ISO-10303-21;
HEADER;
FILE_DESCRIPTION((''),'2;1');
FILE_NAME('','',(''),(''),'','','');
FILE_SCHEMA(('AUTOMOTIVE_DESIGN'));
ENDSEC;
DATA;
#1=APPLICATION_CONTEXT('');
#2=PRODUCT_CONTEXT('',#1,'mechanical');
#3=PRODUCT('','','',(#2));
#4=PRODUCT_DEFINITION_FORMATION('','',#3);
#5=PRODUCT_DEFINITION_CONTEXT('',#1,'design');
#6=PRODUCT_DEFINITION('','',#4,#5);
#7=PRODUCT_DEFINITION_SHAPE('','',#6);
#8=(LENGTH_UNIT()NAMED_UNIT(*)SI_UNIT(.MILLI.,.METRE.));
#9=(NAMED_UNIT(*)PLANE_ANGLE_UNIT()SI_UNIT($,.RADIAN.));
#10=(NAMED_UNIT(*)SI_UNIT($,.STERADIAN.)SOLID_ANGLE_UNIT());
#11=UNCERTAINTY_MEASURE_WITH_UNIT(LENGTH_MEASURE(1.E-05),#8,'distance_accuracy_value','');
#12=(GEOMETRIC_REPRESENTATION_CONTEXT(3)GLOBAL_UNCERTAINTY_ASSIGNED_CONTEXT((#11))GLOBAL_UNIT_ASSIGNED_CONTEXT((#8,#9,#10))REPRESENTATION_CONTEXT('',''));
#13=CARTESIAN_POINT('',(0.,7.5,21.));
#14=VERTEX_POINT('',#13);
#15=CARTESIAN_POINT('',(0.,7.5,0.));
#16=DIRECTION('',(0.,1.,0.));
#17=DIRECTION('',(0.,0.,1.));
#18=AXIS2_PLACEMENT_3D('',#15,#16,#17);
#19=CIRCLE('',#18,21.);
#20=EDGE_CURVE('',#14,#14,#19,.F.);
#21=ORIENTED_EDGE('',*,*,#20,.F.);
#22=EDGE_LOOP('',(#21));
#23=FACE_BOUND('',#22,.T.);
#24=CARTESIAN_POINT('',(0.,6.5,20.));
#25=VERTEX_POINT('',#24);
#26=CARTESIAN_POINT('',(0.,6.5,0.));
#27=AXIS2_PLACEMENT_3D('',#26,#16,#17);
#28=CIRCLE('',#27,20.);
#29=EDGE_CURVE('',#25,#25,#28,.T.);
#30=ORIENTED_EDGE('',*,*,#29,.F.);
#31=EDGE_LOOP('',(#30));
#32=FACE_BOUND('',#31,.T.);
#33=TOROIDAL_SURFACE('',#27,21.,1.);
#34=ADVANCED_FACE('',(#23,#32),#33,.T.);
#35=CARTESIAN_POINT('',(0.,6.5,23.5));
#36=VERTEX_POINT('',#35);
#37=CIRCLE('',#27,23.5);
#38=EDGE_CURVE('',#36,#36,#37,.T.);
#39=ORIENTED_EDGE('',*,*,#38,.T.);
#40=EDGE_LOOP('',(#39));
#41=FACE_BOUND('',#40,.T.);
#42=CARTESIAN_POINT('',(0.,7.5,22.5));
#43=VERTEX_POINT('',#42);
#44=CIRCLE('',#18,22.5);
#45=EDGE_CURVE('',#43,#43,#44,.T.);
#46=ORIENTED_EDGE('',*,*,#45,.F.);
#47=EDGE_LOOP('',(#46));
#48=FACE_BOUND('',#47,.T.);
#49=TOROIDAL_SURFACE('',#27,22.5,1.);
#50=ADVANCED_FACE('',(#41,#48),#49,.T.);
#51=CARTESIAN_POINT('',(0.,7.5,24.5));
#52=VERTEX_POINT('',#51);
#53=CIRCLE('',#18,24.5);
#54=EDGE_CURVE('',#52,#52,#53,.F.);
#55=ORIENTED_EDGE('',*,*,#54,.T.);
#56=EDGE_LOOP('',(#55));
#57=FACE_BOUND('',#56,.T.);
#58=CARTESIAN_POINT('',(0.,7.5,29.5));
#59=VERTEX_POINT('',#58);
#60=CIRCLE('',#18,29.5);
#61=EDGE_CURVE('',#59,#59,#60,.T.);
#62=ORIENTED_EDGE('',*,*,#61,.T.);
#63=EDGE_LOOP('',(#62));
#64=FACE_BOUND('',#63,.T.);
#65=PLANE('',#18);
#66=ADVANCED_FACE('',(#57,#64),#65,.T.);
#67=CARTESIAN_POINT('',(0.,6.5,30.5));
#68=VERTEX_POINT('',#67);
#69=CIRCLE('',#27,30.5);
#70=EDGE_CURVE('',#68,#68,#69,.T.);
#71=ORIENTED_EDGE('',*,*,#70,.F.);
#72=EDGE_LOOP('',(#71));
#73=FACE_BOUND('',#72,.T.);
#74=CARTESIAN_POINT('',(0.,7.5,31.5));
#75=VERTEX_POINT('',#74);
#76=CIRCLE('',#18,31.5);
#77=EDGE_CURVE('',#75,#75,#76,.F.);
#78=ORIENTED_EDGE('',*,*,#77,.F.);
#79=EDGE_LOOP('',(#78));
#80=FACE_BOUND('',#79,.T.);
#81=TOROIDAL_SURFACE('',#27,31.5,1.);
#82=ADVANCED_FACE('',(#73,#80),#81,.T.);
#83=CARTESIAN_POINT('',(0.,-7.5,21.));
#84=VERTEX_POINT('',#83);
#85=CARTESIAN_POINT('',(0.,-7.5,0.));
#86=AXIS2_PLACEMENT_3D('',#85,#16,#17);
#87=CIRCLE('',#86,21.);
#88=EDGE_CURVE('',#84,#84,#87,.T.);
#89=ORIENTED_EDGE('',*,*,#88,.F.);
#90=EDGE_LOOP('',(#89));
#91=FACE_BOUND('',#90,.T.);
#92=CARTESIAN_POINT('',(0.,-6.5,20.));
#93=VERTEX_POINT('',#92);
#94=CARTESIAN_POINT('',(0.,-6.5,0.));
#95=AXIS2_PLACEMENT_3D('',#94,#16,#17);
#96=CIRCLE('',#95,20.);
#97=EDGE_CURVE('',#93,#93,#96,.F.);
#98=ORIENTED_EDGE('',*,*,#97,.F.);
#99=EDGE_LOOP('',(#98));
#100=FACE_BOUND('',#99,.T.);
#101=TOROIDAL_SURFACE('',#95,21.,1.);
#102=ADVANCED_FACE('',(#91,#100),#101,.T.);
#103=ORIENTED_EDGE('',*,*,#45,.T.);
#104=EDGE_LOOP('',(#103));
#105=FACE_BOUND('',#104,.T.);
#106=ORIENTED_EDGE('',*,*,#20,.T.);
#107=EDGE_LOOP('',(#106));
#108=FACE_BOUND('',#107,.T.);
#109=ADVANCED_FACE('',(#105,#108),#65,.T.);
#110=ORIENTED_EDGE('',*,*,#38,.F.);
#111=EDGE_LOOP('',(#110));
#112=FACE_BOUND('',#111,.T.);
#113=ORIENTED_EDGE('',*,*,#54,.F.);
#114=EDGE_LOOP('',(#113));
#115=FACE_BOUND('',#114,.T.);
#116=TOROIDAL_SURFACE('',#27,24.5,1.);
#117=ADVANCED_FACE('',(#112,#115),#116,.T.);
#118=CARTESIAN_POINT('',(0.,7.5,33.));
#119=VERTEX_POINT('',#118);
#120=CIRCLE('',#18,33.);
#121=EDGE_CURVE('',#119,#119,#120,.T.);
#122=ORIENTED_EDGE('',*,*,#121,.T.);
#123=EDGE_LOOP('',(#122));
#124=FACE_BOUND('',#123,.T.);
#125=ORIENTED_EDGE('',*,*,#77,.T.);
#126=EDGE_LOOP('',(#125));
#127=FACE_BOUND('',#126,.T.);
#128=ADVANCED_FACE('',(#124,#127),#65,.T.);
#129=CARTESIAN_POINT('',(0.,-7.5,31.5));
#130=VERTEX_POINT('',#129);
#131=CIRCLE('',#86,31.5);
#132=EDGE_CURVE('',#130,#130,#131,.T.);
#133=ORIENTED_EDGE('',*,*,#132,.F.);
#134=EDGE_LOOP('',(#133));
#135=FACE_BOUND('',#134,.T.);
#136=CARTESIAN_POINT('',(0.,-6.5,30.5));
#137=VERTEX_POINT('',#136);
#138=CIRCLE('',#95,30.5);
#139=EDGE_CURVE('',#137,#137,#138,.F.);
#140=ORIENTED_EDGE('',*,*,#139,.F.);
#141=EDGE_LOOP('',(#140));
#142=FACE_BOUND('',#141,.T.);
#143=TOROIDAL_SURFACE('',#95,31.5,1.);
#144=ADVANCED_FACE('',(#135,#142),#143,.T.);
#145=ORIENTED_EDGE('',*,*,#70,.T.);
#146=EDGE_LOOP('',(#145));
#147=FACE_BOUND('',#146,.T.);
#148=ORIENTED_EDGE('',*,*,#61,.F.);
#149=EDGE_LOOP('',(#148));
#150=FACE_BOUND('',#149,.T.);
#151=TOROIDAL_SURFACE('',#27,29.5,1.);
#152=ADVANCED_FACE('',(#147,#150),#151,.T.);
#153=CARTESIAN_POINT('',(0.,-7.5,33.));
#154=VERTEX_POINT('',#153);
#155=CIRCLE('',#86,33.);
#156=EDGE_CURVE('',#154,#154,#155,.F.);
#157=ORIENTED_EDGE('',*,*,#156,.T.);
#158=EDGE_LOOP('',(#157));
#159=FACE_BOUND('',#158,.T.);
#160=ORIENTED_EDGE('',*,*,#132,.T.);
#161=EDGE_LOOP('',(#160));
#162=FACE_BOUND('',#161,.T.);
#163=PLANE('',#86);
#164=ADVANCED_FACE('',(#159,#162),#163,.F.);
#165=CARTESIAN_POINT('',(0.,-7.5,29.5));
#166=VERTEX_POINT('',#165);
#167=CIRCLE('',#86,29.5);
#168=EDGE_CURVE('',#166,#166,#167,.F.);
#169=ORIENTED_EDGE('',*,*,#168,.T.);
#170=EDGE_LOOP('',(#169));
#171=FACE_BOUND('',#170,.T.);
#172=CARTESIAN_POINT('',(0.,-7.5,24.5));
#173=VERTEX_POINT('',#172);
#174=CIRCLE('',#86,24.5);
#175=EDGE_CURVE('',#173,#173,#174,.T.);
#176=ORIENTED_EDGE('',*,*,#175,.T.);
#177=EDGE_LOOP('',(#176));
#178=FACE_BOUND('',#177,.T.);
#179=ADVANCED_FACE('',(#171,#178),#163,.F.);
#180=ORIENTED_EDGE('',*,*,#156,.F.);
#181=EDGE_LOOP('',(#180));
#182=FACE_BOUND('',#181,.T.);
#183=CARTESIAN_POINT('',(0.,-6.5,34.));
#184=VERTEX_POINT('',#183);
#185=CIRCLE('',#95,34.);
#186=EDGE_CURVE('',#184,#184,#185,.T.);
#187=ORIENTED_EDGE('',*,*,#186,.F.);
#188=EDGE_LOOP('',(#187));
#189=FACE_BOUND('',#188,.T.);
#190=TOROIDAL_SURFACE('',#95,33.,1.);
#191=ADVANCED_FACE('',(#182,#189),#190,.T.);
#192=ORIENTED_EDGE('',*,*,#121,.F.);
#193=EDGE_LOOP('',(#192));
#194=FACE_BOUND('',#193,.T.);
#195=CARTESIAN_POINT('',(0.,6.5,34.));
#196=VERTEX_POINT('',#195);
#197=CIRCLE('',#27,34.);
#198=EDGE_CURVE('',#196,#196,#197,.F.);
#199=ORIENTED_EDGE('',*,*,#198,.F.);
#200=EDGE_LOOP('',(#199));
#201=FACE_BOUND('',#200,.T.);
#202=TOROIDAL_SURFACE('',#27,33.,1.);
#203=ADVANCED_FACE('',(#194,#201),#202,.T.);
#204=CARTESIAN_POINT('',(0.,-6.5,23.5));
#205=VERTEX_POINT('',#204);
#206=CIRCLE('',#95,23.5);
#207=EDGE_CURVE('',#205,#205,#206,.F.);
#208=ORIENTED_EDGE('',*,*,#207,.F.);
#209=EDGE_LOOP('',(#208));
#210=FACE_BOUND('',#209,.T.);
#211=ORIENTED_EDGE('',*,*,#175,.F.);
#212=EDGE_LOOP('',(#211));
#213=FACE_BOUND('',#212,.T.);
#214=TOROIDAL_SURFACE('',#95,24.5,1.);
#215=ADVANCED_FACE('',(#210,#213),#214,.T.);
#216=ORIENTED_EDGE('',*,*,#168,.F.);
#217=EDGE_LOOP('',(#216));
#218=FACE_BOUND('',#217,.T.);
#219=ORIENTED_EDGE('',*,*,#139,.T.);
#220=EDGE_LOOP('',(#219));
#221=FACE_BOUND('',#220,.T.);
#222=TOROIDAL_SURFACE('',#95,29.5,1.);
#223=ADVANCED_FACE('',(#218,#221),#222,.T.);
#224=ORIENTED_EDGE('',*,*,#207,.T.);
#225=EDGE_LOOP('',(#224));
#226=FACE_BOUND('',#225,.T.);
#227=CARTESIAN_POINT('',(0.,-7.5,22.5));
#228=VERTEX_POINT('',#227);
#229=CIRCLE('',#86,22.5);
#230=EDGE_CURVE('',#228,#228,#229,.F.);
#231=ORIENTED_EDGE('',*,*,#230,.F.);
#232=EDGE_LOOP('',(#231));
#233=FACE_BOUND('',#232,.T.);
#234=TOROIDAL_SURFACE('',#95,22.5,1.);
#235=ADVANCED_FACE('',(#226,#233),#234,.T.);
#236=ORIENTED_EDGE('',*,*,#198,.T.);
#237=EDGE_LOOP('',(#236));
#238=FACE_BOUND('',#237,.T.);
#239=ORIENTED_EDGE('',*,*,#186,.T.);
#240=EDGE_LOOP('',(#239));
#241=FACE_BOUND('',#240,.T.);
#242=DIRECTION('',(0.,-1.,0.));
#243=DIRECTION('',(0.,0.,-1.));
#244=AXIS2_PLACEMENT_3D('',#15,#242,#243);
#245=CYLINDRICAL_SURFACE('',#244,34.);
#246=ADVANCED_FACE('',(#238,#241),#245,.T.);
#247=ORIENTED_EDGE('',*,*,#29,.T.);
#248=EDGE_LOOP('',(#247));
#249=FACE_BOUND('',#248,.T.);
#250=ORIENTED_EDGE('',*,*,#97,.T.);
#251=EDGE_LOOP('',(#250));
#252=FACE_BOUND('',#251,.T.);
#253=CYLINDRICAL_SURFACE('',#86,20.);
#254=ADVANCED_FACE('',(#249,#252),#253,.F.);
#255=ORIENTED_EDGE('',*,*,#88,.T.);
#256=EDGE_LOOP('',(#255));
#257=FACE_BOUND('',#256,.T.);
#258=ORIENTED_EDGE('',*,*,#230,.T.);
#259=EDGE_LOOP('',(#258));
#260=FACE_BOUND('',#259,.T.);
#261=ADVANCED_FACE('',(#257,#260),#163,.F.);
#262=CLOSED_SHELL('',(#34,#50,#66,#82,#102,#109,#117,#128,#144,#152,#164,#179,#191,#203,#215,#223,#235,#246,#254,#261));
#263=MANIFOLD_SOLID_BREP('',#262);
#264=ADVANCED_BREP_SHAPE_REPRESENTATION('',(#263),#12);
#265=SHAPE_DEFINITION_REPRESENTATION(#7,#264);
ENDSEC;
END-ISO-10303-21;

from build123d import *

# Parameters (mm, degrees)
SKETCH1_R                = 34
BOSS_EXTRUDE1_DEPTH      = 7.5
FILLET1_R                = 1
CUT_EXTRUDE1_DEPTH       = 49.664669048
CUT_EXTRUDE1_DEPTH_BACK  = 49.664669048
SKETCH2_R                = 30.5
FILLET2_R                = 1
BOSS_EXTRUDE2_DEPTH      = 7.5
BOSS_EXTRUDE2_DEPTH_BACK = 7.5
SKETCH3_R                = 30.5
FILLET3_R                = 1
CUT_EXTRUDE2_DEPTH       = 49.664669048
CUT_EXTRUDE2_DEPTH_BACK  = 49.664669048
SKETCH4_R                = 23.5
FILLET4_R                = 1
BOSS_EXTRUDE3_DEPTH      = 7.5
BOSS_EXTRUDE3_DEPTH_BACK = 7.5
SKETCH5_R                = 23.5
FILLET5_R                = 1
CUT_EXTRUDE3_DEPTH       = 49.664669048
CUT_EXTRUDE3_DEPTH_BACK  = 49.664669048
SKETCH6_R                = 20
FILLET6_R                = 1


with BuildPart() as part:
    # Sketch1 → Boss-Extrude1 (new, symmetric)
    with BuildSketch(Plane(origin=(0, 0, 0), x_dir=(1, 0, 0), z_dir=(0, 1, 0))):
        with Locations(Location((0, 0, 0), (0, 0, 270))):
            Circle(SKETCH1_R)
    extrude(amount=BOSS_EXTRUDE1_DEPTH, both=True)

    # Fillet1
    fillet1_edges = [part.edges().sort_by_distance(p)[0] for p in [
        (0, -7.5, -34),
        (0, 7.5, -34),
    ]]
    fillet(fillet1_edges, radius=FILLET1_R)

    # Sketch2 → Cut-Extrude1 (cut, two sides: drawn at the far end of the back side and taken through both)
    with BuildSketch(Plane(origin=(0, 0, 0), x_dir=(1, 0, 0), z_dir=(0, 1, 0)).offset(-CUT_EXTRUDE1_DEPTH_BACK)):
        with Locations(Location((0, 0, 0), (0, 0, 270))):
            Circle(SKETCH2_R)
    extrude(amount=CUT_EXTRUDE1_DEPTH + CUT_EXTRUDE1_DEPTH_BACK, mode=Mode.SUBTRACT)

    # Fillet2
    fillet2_edges = [part.edges().sort_by_distance(p)[0] for p in [
        (0, -7.5, -30.5),
        (0, 7.5, -30.5),
    ]]
    fillet(fillet2_edges, radius=FILLET2_R)

    # Sketch3 → Boss-Extrude2 (add, two sides: drawn at the far end of the back side and taken through both)
    with BuildSketch(Plane(origin=(0, 0, 0), x_dir=(1, 0, 0), z_dir=(0, 1, 0)).offset(-BOSS_EXTRUDE2_DEPTH_BACK)):
        with Locations(Location((0, 0, 0), (0, 0, 270))):
            Circle(SKETCH3_R)
    extrude(amount=BOSS_EXTRUDE2_DEPTH + BOSS_EXTRUDE2_DEPTH_BACK)

    # Fillet3
    fillet3_edges = [part.edges().sort_by_distance(p)[0] for p in [
        (0, -7.5, -30.5),
        (0, 7.5, -30.5),
    ]]
    fillet(fillet3_edges, radius=FILLET3_R - 0.0001)  # a hair under: the kernel refuses the full size

    # Sketch4 → Cut-Extrude2 (cut, two sides: drawn at the far end of the back side and taken through both)
    with BuildSketch(Plane(origin=(0, 0, 0), x_dir=(1, 0, 0), z_dir=(0, 1, 0)).offset(-CUT_EXTRUDE2_DEPTH_BACK)):
        with Locations(Location((0, 0, 0), (0, 0, 270))):
            Circle(SKETCH4_R)
    extrude(amount=CUT_EXTRUDE2_DEPTH + CUT_EXTRUDE2_DEPTH_BACK, mode=Mode.SUBTRACT)

    # Fillet4
    fillet4_edges = [part.edges().sort_by_distance(p)[0] for p in [
        (0, -7.5, -23.5),
        (0, 7.5, -23.5),
    ]]
    fillet(fillet4_edges, radius=FILLET4_R)

    # Sketch5 → Boss-Extrude3 (add, two sides: drawn at the far end of the back side and taken through both)
    with BuildSketch(Plane(origin=(0, 0, 0), x_dir=(1, 0, 0), z_dir=(0, 1, 0)).offset(-BOSS_EXTRUDE3_DEPTH_BACK)):
        with Locations(Location((0, 0, 0), (0, 0, 270))):
            Circle(SKETCH5_R)
    extrude(amount=BOSS_EXTRUDE3_DEPTH + BOSS_EXTRUDE3_DEPTH_BACK)

    # Fillet5
    fillet5_edges = [part.edges().sort_by_distance(p)[0] for p in [
        (0, -7.5, -23.5),
        (0, 7.5, -23.5),
    ]]
    fillet(fillet5_edges, radius=FILLET5_R - 0.0001)  # a hair under: the kernel refuses the full size

    # Sketch6 → Cut-Extrude3 (cut, two sides: drawn at the far end of the back side and taken through both)
    with BuildSketch(Plane(origin=(0, 0, 0), x_dir=(1, 0, 0), z_dir=(0, 1, 0)).offset(-CUT_EXTRUDE3_DEPTH_BACK)):
        with Locations(Location((0, 0, 0), (0, 0, 270))):
            Circle(SKETCH6_R)
    extrude(amount=CUT_EXTRUDE3_DEPTH + CUT_EXTRUDE3_DEPTH_BACK, mode=Mode.SUBTRACT)

    # Fillet6
    fillet6_edges = [part.edges().sort_by_distance(p)[0] for p in [
        (0, -7.5, -20),
        (0, 7.5, -20),
    ]]
    fillet(fillet6_edges, radius=FILLET6_R)


solid = part.part
